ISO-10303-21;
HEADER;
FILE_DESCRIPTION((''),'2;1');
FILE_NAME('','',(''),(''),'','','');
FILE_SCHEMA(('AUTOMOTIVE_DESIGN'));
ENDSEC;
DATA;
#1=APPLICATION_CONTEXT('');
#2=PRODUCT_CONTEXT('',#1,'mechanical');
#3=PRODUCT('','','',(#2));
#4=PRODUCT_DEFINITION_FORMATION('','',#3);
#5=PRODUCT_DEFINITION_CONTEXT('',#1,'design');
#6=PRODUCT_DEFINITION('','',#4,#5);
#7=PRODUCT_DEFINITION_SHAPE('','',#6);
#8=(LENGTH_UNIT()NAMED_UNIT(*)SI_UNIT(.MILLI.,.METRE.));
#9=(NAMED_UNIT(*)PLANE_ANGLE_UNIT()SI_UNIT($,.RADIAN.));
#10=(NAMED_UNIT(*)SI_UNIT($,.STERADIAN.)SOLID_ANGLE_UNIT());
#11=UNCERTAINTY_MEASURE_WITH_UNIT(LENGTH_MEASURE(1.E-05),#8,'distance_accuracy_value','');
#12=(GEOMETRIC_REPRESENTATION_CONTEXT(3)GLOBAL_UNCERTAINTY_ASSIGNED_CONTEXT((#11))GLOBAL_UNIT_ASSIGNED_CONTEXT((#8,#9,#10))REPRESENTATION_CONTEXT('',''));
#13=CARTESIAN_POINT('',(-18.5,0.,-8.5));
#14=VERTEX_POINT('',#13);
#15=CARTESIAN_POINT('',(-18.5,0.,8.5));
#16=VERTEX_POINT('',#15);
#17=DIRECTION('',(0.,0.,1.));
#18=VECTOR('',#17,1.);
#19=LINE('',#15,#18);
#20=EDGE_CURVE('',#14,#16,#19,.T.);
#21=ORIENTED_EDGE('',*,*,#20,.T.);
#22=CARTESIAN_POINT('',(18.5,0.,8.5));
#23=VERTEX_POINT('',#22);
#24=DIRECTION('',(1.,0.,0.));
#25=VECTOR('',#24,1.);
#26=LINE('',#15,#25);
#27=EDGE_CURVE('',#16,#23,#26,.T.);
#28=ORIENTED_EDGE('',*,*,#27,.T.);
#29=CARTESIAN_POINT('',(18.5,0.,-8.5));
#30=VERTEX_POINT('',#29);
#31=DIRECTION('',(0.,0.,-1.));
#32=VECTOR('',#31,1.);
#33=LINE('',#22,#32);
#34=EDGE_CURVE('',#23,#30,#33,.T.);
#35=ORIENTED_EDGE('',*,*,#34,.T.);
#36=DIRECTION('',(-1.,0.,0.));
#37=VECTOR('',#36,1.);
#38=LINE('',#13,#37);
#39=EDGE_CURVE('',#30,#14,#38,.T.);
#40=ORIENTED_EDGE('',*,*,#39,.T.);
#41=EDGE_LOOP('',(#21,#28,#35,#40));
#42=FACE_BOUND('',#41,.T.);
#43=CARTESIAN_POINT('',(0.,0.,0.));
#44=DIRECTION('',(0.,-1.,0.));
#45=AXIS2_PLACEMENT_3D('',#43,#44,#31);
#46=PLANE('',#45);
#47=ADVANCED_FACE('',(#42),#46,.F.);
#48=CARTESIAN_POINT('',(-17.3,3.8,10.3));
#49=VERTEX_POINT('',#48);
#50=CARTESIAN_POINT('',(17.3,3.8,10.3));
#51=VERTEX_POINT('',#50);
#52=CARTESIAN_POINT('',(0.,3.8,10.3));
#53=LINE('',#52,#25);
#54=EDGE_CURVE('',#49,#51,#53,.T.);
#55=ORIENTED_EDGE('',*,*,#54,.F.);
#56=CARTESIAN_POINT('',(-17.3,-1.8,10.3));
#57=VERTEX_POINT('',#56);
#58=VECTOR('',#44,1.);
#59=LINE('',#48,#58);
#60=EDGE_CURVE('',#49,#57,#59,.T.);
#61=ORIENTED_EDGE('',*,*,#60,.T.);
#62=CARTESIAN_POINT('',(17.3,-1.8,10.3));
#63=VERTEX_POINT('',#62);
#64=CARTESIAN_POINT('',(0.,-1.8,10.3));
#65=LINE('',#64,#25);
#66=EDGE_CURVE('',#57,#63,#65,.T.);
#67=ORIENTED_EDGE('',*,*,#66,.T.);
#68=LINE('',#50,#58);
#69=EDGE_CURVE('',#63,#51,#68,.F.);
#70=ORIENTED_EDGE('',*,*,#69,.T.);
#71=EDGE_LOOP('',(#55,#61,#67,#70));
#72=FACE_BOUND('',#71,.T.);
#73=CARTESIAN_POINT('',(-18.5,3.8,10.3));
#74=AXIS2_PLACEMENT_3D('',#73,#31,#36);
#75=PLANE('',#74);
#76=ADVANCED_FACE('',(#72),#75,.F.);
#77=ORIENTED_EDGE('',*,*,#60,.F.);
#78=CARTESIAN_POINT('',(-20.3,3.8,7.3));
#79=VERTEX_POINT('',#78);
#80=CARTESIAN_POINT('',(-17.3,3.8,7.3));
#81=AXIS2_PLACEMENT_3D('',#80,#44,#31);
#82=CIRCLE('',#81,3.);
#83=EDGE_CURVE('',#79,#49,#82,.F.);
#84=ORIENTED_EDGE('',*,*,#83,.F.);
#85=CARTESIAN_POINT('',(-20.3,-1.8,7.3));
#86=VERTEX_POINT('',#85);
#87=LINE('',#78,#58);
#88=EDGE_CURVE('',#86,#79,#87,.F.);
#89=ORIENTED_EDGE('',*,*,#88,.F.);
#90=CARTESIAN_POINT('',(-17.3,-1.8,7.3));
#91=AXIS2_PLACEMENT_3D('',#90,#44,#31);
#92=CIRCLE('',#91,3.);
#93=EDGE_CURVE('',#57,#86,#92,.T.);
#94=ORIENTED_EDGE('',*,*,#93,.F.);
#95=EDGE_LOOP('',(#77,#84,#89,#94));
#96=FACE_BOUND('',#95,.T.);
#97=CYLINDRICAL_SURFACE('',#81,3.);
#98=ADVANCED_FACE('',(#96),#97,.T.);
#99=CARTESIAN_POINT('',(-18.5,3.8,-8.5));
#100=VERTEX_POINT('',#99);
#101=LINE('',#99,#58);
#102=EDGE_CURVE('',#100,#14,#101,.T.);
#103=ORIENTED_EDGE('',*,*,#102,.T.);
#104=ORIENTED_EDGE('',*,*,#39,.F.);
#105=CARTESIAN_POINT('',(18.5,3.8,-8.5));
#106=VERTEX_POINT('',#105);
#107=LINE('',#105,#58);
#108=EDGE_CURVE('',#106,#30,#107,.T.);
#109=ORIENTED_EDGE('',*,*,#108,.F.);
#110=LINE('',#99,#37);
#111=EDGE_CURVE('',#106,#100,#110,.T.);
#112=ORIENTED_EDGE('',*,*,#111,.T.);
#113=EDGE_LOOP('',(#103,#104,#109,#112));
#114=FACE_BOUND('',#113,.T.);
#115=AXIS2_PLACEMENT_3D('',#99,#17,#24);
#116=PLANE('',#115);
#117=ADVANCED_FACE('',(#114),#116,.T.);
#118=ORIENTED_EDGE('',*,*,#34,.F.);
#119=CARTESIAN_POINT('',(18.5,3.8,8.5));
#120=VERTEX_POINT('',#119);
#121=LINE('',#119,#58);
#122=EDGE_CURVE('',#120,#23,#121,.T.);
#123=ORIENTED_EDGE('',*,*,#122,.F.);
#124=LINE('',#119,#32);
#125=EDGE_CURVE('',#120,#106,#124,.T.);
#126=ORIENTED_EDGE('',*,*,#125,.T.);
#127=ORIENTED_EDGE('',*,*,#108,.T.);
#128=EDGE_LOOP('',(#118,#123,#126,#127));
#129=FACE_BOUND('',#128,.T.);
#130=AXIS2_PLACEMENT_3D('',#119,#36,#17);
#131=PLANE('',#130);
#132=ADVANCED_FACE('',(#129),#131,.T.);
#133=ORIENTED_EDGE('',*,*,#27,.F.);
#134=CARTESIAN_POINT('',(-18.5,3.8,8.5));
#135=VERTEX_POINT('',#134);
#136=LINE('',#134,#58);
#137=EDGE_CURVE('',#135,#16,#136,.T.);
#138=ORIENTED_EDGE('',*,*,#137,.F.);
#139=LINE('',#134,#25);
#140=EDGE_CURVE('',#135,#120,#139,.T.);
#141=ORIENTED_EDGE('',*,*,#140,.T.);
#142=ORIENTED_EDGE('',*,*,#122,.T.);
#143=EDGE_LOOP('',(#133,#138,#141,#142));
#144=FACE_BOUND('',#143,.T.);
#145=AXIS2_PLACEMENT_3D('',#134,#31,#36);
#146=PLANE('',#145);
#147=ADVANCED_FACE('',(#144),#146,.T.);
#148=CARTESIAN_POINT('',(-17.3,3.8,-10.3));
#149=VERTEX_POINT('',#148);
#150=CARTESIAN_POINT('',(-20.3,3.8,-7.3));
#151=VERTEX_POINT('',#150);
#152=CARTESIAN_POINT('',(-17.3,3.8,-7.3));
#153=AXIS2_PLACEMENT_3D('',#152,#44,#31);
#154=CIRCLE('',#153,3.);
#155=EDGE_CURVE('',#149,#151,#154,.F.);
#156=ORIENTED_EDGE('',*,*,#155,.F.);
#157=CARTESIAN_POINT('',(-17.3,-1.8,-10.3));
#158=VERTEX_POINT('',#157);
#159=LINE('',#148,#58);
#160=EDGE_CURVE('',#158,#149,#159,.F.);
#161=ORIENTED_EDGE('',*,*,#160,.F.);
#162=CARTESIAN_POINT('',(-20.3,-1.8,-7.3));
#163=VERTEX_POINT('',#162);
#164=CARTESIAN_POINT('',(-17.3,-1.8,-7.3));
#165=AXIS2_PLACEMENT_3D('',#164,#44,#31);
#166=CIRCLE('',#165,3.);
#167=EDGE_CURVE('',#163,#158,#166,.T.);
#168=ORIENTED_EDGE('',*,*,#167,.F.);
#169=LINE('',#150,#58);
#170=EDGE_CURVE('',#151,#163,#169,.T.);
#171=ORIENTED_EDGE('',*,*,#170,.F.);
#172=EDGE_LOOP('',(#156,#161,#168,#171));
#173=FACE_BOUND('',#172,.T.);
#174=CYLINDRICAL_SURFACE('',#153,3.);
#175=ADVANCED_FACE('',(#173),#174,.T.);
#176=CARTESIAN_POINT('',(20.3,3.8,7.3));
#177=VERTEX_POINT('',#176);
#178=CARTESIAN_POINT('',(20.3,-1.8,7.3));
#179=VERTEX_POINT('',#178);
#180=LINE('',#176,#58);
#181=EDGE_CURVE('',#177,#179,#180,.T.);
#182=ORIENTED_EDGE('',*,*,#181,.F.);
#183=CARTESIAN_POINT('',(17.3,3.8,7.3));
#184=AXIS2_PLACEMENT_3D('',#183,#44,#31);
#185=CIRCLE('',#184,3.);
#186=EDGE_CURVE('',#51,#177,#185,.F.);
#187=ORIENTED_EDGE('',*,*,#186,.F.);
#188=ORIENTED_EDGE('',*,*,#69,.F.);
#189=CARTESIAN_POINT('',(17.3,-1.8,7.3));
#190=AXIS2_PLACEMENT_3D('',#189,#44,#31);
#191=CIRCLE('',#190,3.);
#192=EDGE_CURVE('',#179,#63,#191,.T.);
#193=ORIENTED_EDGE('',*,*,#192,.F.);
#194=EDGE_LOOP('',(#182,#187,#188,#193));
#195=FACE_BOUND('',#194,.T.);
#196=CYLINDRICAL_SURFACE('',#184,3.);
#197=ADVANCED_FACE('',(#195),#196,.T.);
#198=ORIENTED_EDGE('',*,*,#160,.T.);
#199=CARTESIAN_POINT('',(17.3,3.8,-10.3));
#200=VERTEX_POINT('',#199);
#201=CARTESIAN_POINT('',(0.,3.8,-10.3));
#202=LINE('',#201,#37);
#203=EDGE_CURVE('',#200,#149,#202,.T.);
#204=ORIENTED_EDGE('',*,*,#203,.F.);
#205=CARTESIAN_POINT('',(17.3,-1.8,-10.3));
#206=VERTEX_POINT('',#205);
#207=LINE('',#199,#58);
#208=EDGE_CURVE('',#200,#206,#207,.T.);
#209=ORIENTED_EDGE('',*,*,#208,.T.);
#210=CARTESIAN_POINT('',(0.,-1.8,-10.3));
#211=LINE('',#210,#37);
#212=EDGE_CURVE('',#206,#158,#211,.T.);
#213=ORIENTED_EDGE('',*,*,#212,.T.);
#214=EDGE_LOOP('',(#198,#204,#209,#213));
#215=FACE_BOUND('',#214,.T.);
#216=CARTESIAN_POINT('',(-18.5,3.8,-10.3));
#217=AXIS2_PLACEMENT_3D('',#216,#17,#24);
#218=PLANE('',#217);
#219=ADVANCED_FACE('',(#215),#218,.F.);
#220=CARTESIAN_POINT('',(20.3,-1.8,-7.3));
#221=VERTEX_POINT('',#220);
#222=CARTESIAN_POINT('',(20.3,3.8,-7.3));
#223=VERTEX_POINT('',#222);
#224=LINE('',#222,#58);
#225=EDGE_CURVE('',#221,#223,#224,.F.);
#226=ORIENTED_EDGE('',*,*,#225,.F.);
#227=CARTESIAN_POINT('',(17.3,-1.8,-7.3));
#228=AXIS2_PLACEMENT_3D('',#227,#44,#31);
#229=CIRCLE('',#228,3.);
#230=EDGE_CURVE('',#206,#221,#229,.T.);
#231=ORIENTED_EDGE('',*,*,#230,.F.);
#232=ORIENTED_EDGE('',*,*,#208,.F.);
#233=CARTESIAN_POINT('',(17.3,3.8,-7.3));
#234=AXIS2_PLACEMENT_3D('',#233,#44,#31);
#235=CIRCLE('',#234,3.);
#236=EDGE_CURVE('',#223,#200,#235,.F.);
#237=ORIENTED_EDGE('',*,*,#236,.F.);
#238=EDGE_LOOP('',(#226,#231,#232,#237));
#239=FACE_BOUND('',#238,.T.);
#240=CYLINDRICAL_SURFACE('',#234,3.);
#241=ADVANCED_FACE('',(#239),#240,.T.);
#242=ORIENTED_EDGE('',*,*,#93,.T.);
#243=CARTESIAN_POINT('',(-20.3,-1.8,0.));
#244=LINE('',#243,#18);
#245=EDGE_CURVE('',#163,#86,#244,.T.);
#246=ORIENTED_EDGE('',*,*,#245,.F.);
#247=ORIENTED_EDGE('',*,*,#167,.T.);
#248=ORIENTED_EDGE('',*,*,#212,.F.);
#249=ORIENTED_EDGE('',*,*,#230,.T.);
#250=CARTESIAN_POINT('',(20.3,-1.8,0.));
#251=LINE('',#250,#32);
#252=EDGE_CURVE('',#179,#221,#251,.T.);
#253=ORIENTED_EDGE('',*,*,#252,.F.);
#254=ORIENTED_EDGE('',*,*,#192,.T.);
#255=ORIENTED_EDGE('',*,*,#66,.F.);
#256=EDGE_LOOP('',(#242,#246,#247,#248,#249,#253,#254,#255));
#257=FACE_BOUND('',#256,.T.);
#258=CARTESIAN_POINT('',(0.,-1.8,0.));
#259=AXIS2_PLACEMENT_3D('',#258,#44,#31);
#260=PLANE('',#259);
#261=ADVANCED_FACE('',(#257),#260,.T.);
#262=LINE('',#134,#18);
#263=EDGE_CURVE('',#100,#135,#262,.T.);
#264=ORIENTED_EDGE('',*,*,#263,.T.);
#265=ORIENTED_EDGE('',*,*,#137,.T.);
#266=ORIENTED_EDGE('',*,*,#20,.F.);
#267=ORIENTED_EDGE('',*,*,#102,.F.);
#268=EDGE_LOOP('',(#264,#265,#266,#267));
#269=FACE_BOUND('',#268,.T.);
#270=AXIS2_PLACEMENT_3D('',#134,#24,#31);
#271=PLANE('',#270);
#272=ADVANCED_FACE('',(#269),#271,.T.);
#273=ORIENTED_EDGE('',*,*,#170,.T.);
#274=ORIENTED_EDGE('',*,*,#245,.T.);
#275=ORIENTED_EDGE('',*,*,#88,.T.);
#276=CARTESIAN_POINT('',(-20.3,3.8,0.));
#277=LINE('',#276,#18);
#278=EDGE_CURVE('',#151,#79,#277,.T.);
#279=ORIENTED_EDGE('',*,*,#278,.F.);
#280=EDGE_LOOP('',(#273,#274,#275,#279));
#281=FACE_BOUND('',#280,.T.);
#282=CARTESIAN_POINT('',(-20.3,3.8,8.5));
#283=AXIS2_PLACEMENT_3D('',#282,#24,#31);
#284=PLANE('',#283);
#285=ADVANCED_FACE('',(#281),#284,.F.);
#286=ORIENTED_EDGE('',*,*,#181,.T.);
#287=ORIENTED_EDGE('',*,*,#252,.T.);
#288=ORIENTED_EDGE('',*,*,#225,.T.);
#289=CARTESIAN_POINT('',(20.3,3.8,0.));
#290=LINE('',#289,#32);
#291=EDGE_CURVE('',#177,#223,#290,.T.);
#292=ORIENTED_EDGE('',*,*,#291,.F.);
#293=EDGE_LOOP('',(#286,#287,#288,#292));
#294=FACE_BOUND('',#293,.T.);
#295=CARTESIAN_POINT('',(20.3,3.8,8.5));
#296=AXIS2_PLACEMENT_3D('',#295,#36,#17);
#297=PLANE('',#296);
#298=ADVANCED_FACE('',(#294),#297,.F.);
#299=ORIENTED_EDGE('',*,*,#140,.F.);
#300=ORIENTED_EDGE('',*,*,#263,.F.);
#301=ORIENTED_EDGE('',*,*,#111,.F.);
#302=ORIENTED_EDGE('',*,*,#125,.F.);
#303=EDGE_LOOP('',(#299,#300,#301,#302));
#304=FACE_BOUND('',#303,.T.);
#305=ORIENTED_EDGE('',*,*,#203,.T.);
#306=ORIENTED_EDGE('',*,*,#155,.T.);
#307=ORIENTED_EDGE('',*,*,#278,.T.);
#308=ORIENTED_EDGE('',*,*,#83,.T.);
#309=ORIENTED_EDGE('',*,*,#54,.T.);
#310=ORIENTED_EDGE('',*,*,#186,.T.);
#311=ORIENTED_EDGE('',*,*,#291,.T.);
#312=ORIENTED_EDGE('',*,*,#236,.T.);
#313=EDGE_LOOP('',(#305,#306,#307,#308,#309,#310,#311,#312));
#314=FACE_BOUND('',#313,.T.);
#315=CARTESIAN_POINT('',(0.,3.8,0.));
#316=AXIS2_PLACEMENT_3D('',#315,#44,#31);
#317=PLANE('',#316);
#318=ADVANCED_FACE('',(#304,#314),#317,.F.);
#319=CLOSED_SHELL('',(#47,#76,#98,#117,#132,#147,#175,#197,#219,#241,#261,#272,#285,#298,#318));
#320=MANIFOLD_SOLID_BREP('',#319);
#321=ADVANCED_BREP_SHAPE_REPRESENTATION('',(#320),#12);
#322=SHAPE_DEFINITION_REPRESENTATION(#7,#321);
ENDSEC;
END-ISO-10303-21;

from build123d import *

# Parameters (mm, degrees)
CROQUIS1_W              = 37
CROQUIS1_H              = 17
SALIENTE_EXTRUIR1_DEPTH = 3.8
VACIADO1_T              = 1.8
REDONDEO2_R             = 3


with BuildPart() as part:
    # Croquis1 → Saliente-Extruir1 (new body)
    with BuildSketch(Plane(origin=(0, 0, 0), x_dir=(1, 0, 0), z_dir=(0, 1, 0))):
        Rectangle(CROQUIS1_W, CROQUIS1_H)
    extrude(amount=SALIENTE_EXTRUIR1_DEPTH)

    # Vaciado1
    vaciado1_openings = [part.faces().sort_by_distance(p)[0] for p in [
        (0, 3.8, 0),
    ]]
    offset(amount=VACIADO1_T, openings=vaciado1_openings, kind=Kind.INTERSECTION)

    # Redondeo2
    # the kernel refuses this fillet: 3 mm, written as the material it takes off along each edge
    with BuildSketch(Plane(origin=(20.3, -9.3, 10.3), x_dir=(-1, 0, 0), z_dir=(0, 1, 0)), Plane(origin=(-20.3, 11.3, 10.3), x_dir=(1, 0, 0), z_dir=(0, -1, 0)), Plane(origin=(-20.3, -9.3, -10.3), x_dir=(1, 0, 0), z_dir=(0, 1, 0)), Plane(origin=(20.3, -9.3, -10.3), x_dir=(0, 0, 1), z_dir=(0, 1, 0))) as redondeo2_piece_1:
        with BuildLine():
            CenterArc((REDONDEO2_R, -REDONDEO2_R), REDONDEO2_R, 90, 90)
            Line((0, -REDONDEO2_R), (0, 0))
            Line((0, 0), (REDONDEO2_R, 0))
        make_face()
    extrude(amount=20.6, mode=Mode.SUBTRACT)


solid = part.part
